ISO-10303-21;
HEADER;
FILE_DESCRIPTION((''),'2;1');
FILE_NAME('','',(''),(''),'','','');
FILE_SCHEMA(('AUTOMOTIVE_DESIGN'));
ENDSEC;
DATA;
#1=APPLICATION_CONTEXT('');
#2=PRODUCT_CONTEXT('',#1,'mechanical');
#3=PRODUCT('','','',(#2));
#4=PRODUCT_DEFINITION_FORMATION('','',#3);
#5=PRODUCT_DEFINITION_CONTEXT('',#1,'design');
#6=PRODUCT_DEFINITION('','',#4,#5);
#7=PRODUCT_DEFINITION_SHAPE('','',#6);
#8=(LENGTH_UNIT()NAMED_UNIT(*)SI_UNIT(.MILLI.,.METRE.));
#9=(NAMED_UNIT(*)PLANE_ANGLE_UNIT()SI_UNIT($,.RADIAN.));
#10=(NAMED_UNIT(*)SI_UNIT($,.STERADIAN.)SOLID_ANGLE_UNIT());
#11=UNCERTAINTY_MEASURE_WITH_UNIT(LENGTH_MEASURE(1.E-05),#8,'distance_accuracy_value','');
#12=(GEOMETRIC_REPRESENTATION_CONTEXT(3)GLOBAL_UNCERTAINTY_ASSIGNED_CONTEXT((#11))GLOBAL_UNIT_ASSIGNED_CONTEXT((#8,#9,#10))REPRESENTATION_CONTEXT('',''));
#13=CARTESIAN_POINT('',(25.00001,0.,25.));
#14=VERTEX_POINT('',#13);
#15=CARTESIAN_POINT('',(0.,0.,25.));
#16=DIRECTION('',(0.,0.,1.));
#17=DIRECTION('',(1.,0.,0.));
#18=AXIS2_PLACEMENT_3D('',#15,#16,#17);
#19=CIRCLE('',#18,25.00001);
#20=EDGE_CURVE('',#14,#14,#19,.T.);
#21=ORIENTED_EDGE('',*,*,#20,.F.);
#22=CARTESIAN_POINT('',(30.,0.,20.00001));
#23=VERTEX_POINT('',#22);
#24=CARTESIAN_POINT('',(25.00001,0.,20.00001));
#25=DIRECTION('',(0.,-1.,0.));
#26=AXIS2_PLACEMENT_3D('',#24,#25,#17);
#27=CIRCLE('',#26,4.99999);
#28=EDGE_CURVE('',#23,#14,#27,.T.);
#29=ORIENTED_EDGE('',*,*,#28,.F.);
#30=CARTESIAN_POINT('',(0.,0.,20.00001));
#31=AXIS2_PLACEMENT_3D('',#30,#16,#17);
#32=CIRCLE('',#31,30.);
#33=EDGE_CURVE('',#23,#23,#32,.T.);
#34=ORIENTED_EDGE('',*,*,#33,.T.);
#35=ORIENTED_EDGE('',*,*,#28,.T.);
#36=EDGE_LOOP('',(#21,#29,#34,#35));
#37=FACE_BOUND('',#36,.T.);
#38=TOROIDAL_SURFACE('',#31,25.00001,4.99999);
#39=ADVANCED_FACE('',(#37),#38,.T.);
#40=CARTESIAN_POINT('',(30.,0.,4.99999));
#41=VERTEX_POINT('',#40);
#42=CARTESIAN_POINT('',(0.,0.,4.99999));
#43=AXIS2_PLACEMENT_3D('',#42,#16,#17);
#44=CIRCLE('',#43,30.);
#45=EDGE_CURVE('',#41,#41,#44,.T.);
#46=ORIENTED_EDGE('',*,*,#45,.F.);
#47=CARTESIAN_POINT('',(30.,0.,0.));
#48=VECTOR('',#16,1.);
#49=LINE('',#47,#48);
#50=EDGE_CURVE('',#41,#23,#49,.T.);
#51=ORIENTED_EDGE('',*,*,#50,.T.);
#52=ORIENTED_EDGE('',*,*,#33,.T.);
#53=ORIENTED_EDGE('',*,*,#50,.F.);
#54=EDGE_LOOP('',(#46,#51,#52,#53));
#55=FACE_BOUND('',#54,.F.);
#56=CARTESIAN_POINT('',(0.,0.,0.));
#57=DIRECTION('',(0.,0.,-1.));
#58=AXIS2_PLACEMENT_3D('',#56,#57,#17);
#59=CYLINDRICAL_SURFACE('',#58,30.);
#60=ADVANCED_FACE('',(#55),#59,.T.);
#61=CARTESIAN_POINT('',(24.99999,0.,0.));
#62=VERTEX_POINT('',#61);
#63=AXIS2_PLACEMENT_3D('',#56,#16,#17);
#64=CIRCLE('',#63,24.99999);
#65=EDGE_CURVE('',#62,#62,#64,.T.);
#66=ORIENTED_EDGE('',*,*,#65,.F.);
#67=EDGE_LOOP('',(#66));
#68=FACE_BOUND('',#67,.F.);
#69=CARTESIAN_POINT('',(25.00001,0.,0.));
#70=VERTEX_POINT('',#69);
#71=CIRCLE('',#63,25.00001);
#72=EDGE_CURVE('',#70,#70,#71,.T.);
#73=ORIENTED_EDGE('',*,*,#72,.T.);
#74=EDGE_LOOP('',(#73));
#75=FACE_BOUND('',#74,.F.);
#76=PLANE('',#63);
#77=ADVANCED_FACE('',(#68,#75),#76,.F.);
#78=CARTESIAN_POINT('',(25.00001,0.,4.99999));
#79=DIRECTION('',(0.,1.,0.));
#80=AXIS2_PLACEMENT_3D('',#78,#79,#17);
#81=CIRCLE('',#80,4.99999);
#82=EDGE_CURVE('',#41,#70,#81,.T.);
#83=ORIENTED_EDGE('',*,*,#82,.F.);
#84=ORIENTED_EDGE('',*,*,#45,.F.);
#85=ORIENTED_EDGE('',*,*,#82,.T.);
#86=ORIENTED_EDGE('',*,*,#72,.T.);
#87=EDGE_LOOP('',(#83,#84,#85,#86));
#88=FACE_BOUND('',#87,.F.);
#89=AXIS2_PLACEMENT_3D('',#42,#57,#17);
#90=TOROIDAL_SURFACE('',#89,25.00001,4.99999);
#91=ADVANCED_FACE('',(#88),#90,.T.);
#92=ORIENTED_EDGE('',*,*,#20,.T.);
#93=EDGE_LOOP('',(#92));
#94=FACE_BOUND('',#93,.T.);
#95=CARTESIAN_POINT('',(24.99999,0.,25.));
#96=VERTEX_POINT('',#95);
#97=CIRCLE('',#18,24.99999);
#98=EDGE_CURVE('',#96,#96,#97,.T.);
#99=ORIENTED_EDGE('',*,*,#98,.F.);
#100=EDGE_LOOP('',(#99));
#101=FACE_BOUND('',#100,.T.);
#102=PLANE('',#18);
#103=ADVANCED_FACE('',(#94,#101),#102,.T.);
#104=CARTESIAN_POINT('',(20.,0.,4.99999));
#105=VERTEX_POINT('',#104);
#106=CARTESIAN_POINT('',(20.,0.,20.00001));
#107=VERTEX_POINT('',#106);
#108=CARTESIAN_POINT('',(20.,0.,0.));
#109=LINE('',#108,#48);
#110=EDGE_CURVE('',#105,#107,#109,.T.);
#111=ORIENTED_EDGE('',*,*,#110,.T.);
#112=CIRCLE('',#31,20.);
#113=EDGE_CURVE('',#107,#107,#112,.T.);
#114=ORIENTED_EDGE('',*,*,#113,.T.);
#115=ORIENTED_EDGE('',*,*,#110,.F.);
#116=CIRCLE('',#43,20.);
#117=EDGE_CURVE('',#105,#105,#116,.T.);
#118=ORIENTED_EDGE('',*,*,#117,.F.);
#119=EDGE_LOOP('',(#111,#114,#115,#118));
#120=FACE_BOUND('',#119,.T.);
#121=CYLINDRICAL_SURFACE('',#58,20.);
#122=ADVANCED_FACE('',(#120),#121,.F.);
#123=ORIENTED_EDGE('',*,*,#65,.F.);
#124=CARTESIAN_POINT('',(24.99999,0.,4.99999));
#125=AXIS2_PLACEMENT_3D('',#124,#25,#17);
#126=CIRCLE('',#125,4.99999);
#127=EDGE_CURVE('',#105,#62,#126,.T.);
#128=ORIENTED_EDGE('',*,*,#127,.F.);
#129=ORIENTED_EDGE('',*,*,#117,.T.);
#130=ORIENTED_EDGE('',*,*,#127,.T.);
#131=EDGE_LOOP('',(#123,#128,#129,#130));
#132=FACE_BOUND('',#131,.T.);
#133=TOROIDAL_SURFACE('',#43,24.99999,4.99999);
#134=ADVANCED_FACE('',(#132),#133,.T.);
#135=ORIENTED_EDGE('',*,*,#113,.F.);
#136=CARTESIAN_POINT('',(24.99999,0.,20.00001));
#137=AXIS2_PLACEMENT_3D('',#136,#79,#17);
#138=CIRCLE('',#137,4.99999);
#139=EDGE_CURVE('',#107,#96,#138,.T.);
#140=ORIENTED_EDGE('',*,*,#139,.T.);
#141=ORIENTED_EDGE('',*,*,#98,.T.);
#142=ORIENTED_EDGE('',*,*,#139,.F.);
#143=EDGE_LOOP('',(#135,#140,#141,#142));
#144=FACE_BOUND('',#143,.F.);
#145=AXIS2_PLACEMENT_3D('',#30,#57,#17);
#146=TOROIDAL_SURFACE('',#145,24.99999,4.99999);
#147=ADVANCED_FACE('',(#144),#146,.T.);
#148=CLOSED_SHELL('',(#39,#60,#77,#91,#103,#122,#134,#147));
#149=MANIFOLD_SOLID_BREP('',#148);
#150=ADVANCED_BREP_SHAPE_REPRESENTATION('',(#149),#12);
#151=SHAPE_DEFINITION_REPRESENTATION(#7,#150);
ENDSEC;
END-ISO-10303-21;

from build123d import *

# Parameters (mm, degrees)
F0_R     = 30
F0_R_2   = 20
F1_DEPTH = 25
F2_R     = 4.99999


# Not quite as in the source:
# - a fillet or chamfer is up to 0.001 mm smaller than in the source, because OpenCascade refuses the exact size


with BuildPart() as f1:
    # F0 (on Top) → F1 (new body)
    with BuildSketch(Plane.XY):
        Circle(F0_R)
        Circle(F0_R_2, mode=Mode.SUBTRACT)
    extrude(amount=F1_DEPTH)

    # F2 (radius 5 in the source; OpenCascade refuses exactly that, so slightly less here)
    f2_edges = [f1.edges().sort_by_distance(p)[0] for p in [
        (-30, 0, 25),
        (-20, 0, 25),
        (30, 0, 12.5),
        (-30, 0, 0),
        (-20, 0, 0),
    ]]
    fillet(f2_edges, radius=F2_R)


solid = f1.part
